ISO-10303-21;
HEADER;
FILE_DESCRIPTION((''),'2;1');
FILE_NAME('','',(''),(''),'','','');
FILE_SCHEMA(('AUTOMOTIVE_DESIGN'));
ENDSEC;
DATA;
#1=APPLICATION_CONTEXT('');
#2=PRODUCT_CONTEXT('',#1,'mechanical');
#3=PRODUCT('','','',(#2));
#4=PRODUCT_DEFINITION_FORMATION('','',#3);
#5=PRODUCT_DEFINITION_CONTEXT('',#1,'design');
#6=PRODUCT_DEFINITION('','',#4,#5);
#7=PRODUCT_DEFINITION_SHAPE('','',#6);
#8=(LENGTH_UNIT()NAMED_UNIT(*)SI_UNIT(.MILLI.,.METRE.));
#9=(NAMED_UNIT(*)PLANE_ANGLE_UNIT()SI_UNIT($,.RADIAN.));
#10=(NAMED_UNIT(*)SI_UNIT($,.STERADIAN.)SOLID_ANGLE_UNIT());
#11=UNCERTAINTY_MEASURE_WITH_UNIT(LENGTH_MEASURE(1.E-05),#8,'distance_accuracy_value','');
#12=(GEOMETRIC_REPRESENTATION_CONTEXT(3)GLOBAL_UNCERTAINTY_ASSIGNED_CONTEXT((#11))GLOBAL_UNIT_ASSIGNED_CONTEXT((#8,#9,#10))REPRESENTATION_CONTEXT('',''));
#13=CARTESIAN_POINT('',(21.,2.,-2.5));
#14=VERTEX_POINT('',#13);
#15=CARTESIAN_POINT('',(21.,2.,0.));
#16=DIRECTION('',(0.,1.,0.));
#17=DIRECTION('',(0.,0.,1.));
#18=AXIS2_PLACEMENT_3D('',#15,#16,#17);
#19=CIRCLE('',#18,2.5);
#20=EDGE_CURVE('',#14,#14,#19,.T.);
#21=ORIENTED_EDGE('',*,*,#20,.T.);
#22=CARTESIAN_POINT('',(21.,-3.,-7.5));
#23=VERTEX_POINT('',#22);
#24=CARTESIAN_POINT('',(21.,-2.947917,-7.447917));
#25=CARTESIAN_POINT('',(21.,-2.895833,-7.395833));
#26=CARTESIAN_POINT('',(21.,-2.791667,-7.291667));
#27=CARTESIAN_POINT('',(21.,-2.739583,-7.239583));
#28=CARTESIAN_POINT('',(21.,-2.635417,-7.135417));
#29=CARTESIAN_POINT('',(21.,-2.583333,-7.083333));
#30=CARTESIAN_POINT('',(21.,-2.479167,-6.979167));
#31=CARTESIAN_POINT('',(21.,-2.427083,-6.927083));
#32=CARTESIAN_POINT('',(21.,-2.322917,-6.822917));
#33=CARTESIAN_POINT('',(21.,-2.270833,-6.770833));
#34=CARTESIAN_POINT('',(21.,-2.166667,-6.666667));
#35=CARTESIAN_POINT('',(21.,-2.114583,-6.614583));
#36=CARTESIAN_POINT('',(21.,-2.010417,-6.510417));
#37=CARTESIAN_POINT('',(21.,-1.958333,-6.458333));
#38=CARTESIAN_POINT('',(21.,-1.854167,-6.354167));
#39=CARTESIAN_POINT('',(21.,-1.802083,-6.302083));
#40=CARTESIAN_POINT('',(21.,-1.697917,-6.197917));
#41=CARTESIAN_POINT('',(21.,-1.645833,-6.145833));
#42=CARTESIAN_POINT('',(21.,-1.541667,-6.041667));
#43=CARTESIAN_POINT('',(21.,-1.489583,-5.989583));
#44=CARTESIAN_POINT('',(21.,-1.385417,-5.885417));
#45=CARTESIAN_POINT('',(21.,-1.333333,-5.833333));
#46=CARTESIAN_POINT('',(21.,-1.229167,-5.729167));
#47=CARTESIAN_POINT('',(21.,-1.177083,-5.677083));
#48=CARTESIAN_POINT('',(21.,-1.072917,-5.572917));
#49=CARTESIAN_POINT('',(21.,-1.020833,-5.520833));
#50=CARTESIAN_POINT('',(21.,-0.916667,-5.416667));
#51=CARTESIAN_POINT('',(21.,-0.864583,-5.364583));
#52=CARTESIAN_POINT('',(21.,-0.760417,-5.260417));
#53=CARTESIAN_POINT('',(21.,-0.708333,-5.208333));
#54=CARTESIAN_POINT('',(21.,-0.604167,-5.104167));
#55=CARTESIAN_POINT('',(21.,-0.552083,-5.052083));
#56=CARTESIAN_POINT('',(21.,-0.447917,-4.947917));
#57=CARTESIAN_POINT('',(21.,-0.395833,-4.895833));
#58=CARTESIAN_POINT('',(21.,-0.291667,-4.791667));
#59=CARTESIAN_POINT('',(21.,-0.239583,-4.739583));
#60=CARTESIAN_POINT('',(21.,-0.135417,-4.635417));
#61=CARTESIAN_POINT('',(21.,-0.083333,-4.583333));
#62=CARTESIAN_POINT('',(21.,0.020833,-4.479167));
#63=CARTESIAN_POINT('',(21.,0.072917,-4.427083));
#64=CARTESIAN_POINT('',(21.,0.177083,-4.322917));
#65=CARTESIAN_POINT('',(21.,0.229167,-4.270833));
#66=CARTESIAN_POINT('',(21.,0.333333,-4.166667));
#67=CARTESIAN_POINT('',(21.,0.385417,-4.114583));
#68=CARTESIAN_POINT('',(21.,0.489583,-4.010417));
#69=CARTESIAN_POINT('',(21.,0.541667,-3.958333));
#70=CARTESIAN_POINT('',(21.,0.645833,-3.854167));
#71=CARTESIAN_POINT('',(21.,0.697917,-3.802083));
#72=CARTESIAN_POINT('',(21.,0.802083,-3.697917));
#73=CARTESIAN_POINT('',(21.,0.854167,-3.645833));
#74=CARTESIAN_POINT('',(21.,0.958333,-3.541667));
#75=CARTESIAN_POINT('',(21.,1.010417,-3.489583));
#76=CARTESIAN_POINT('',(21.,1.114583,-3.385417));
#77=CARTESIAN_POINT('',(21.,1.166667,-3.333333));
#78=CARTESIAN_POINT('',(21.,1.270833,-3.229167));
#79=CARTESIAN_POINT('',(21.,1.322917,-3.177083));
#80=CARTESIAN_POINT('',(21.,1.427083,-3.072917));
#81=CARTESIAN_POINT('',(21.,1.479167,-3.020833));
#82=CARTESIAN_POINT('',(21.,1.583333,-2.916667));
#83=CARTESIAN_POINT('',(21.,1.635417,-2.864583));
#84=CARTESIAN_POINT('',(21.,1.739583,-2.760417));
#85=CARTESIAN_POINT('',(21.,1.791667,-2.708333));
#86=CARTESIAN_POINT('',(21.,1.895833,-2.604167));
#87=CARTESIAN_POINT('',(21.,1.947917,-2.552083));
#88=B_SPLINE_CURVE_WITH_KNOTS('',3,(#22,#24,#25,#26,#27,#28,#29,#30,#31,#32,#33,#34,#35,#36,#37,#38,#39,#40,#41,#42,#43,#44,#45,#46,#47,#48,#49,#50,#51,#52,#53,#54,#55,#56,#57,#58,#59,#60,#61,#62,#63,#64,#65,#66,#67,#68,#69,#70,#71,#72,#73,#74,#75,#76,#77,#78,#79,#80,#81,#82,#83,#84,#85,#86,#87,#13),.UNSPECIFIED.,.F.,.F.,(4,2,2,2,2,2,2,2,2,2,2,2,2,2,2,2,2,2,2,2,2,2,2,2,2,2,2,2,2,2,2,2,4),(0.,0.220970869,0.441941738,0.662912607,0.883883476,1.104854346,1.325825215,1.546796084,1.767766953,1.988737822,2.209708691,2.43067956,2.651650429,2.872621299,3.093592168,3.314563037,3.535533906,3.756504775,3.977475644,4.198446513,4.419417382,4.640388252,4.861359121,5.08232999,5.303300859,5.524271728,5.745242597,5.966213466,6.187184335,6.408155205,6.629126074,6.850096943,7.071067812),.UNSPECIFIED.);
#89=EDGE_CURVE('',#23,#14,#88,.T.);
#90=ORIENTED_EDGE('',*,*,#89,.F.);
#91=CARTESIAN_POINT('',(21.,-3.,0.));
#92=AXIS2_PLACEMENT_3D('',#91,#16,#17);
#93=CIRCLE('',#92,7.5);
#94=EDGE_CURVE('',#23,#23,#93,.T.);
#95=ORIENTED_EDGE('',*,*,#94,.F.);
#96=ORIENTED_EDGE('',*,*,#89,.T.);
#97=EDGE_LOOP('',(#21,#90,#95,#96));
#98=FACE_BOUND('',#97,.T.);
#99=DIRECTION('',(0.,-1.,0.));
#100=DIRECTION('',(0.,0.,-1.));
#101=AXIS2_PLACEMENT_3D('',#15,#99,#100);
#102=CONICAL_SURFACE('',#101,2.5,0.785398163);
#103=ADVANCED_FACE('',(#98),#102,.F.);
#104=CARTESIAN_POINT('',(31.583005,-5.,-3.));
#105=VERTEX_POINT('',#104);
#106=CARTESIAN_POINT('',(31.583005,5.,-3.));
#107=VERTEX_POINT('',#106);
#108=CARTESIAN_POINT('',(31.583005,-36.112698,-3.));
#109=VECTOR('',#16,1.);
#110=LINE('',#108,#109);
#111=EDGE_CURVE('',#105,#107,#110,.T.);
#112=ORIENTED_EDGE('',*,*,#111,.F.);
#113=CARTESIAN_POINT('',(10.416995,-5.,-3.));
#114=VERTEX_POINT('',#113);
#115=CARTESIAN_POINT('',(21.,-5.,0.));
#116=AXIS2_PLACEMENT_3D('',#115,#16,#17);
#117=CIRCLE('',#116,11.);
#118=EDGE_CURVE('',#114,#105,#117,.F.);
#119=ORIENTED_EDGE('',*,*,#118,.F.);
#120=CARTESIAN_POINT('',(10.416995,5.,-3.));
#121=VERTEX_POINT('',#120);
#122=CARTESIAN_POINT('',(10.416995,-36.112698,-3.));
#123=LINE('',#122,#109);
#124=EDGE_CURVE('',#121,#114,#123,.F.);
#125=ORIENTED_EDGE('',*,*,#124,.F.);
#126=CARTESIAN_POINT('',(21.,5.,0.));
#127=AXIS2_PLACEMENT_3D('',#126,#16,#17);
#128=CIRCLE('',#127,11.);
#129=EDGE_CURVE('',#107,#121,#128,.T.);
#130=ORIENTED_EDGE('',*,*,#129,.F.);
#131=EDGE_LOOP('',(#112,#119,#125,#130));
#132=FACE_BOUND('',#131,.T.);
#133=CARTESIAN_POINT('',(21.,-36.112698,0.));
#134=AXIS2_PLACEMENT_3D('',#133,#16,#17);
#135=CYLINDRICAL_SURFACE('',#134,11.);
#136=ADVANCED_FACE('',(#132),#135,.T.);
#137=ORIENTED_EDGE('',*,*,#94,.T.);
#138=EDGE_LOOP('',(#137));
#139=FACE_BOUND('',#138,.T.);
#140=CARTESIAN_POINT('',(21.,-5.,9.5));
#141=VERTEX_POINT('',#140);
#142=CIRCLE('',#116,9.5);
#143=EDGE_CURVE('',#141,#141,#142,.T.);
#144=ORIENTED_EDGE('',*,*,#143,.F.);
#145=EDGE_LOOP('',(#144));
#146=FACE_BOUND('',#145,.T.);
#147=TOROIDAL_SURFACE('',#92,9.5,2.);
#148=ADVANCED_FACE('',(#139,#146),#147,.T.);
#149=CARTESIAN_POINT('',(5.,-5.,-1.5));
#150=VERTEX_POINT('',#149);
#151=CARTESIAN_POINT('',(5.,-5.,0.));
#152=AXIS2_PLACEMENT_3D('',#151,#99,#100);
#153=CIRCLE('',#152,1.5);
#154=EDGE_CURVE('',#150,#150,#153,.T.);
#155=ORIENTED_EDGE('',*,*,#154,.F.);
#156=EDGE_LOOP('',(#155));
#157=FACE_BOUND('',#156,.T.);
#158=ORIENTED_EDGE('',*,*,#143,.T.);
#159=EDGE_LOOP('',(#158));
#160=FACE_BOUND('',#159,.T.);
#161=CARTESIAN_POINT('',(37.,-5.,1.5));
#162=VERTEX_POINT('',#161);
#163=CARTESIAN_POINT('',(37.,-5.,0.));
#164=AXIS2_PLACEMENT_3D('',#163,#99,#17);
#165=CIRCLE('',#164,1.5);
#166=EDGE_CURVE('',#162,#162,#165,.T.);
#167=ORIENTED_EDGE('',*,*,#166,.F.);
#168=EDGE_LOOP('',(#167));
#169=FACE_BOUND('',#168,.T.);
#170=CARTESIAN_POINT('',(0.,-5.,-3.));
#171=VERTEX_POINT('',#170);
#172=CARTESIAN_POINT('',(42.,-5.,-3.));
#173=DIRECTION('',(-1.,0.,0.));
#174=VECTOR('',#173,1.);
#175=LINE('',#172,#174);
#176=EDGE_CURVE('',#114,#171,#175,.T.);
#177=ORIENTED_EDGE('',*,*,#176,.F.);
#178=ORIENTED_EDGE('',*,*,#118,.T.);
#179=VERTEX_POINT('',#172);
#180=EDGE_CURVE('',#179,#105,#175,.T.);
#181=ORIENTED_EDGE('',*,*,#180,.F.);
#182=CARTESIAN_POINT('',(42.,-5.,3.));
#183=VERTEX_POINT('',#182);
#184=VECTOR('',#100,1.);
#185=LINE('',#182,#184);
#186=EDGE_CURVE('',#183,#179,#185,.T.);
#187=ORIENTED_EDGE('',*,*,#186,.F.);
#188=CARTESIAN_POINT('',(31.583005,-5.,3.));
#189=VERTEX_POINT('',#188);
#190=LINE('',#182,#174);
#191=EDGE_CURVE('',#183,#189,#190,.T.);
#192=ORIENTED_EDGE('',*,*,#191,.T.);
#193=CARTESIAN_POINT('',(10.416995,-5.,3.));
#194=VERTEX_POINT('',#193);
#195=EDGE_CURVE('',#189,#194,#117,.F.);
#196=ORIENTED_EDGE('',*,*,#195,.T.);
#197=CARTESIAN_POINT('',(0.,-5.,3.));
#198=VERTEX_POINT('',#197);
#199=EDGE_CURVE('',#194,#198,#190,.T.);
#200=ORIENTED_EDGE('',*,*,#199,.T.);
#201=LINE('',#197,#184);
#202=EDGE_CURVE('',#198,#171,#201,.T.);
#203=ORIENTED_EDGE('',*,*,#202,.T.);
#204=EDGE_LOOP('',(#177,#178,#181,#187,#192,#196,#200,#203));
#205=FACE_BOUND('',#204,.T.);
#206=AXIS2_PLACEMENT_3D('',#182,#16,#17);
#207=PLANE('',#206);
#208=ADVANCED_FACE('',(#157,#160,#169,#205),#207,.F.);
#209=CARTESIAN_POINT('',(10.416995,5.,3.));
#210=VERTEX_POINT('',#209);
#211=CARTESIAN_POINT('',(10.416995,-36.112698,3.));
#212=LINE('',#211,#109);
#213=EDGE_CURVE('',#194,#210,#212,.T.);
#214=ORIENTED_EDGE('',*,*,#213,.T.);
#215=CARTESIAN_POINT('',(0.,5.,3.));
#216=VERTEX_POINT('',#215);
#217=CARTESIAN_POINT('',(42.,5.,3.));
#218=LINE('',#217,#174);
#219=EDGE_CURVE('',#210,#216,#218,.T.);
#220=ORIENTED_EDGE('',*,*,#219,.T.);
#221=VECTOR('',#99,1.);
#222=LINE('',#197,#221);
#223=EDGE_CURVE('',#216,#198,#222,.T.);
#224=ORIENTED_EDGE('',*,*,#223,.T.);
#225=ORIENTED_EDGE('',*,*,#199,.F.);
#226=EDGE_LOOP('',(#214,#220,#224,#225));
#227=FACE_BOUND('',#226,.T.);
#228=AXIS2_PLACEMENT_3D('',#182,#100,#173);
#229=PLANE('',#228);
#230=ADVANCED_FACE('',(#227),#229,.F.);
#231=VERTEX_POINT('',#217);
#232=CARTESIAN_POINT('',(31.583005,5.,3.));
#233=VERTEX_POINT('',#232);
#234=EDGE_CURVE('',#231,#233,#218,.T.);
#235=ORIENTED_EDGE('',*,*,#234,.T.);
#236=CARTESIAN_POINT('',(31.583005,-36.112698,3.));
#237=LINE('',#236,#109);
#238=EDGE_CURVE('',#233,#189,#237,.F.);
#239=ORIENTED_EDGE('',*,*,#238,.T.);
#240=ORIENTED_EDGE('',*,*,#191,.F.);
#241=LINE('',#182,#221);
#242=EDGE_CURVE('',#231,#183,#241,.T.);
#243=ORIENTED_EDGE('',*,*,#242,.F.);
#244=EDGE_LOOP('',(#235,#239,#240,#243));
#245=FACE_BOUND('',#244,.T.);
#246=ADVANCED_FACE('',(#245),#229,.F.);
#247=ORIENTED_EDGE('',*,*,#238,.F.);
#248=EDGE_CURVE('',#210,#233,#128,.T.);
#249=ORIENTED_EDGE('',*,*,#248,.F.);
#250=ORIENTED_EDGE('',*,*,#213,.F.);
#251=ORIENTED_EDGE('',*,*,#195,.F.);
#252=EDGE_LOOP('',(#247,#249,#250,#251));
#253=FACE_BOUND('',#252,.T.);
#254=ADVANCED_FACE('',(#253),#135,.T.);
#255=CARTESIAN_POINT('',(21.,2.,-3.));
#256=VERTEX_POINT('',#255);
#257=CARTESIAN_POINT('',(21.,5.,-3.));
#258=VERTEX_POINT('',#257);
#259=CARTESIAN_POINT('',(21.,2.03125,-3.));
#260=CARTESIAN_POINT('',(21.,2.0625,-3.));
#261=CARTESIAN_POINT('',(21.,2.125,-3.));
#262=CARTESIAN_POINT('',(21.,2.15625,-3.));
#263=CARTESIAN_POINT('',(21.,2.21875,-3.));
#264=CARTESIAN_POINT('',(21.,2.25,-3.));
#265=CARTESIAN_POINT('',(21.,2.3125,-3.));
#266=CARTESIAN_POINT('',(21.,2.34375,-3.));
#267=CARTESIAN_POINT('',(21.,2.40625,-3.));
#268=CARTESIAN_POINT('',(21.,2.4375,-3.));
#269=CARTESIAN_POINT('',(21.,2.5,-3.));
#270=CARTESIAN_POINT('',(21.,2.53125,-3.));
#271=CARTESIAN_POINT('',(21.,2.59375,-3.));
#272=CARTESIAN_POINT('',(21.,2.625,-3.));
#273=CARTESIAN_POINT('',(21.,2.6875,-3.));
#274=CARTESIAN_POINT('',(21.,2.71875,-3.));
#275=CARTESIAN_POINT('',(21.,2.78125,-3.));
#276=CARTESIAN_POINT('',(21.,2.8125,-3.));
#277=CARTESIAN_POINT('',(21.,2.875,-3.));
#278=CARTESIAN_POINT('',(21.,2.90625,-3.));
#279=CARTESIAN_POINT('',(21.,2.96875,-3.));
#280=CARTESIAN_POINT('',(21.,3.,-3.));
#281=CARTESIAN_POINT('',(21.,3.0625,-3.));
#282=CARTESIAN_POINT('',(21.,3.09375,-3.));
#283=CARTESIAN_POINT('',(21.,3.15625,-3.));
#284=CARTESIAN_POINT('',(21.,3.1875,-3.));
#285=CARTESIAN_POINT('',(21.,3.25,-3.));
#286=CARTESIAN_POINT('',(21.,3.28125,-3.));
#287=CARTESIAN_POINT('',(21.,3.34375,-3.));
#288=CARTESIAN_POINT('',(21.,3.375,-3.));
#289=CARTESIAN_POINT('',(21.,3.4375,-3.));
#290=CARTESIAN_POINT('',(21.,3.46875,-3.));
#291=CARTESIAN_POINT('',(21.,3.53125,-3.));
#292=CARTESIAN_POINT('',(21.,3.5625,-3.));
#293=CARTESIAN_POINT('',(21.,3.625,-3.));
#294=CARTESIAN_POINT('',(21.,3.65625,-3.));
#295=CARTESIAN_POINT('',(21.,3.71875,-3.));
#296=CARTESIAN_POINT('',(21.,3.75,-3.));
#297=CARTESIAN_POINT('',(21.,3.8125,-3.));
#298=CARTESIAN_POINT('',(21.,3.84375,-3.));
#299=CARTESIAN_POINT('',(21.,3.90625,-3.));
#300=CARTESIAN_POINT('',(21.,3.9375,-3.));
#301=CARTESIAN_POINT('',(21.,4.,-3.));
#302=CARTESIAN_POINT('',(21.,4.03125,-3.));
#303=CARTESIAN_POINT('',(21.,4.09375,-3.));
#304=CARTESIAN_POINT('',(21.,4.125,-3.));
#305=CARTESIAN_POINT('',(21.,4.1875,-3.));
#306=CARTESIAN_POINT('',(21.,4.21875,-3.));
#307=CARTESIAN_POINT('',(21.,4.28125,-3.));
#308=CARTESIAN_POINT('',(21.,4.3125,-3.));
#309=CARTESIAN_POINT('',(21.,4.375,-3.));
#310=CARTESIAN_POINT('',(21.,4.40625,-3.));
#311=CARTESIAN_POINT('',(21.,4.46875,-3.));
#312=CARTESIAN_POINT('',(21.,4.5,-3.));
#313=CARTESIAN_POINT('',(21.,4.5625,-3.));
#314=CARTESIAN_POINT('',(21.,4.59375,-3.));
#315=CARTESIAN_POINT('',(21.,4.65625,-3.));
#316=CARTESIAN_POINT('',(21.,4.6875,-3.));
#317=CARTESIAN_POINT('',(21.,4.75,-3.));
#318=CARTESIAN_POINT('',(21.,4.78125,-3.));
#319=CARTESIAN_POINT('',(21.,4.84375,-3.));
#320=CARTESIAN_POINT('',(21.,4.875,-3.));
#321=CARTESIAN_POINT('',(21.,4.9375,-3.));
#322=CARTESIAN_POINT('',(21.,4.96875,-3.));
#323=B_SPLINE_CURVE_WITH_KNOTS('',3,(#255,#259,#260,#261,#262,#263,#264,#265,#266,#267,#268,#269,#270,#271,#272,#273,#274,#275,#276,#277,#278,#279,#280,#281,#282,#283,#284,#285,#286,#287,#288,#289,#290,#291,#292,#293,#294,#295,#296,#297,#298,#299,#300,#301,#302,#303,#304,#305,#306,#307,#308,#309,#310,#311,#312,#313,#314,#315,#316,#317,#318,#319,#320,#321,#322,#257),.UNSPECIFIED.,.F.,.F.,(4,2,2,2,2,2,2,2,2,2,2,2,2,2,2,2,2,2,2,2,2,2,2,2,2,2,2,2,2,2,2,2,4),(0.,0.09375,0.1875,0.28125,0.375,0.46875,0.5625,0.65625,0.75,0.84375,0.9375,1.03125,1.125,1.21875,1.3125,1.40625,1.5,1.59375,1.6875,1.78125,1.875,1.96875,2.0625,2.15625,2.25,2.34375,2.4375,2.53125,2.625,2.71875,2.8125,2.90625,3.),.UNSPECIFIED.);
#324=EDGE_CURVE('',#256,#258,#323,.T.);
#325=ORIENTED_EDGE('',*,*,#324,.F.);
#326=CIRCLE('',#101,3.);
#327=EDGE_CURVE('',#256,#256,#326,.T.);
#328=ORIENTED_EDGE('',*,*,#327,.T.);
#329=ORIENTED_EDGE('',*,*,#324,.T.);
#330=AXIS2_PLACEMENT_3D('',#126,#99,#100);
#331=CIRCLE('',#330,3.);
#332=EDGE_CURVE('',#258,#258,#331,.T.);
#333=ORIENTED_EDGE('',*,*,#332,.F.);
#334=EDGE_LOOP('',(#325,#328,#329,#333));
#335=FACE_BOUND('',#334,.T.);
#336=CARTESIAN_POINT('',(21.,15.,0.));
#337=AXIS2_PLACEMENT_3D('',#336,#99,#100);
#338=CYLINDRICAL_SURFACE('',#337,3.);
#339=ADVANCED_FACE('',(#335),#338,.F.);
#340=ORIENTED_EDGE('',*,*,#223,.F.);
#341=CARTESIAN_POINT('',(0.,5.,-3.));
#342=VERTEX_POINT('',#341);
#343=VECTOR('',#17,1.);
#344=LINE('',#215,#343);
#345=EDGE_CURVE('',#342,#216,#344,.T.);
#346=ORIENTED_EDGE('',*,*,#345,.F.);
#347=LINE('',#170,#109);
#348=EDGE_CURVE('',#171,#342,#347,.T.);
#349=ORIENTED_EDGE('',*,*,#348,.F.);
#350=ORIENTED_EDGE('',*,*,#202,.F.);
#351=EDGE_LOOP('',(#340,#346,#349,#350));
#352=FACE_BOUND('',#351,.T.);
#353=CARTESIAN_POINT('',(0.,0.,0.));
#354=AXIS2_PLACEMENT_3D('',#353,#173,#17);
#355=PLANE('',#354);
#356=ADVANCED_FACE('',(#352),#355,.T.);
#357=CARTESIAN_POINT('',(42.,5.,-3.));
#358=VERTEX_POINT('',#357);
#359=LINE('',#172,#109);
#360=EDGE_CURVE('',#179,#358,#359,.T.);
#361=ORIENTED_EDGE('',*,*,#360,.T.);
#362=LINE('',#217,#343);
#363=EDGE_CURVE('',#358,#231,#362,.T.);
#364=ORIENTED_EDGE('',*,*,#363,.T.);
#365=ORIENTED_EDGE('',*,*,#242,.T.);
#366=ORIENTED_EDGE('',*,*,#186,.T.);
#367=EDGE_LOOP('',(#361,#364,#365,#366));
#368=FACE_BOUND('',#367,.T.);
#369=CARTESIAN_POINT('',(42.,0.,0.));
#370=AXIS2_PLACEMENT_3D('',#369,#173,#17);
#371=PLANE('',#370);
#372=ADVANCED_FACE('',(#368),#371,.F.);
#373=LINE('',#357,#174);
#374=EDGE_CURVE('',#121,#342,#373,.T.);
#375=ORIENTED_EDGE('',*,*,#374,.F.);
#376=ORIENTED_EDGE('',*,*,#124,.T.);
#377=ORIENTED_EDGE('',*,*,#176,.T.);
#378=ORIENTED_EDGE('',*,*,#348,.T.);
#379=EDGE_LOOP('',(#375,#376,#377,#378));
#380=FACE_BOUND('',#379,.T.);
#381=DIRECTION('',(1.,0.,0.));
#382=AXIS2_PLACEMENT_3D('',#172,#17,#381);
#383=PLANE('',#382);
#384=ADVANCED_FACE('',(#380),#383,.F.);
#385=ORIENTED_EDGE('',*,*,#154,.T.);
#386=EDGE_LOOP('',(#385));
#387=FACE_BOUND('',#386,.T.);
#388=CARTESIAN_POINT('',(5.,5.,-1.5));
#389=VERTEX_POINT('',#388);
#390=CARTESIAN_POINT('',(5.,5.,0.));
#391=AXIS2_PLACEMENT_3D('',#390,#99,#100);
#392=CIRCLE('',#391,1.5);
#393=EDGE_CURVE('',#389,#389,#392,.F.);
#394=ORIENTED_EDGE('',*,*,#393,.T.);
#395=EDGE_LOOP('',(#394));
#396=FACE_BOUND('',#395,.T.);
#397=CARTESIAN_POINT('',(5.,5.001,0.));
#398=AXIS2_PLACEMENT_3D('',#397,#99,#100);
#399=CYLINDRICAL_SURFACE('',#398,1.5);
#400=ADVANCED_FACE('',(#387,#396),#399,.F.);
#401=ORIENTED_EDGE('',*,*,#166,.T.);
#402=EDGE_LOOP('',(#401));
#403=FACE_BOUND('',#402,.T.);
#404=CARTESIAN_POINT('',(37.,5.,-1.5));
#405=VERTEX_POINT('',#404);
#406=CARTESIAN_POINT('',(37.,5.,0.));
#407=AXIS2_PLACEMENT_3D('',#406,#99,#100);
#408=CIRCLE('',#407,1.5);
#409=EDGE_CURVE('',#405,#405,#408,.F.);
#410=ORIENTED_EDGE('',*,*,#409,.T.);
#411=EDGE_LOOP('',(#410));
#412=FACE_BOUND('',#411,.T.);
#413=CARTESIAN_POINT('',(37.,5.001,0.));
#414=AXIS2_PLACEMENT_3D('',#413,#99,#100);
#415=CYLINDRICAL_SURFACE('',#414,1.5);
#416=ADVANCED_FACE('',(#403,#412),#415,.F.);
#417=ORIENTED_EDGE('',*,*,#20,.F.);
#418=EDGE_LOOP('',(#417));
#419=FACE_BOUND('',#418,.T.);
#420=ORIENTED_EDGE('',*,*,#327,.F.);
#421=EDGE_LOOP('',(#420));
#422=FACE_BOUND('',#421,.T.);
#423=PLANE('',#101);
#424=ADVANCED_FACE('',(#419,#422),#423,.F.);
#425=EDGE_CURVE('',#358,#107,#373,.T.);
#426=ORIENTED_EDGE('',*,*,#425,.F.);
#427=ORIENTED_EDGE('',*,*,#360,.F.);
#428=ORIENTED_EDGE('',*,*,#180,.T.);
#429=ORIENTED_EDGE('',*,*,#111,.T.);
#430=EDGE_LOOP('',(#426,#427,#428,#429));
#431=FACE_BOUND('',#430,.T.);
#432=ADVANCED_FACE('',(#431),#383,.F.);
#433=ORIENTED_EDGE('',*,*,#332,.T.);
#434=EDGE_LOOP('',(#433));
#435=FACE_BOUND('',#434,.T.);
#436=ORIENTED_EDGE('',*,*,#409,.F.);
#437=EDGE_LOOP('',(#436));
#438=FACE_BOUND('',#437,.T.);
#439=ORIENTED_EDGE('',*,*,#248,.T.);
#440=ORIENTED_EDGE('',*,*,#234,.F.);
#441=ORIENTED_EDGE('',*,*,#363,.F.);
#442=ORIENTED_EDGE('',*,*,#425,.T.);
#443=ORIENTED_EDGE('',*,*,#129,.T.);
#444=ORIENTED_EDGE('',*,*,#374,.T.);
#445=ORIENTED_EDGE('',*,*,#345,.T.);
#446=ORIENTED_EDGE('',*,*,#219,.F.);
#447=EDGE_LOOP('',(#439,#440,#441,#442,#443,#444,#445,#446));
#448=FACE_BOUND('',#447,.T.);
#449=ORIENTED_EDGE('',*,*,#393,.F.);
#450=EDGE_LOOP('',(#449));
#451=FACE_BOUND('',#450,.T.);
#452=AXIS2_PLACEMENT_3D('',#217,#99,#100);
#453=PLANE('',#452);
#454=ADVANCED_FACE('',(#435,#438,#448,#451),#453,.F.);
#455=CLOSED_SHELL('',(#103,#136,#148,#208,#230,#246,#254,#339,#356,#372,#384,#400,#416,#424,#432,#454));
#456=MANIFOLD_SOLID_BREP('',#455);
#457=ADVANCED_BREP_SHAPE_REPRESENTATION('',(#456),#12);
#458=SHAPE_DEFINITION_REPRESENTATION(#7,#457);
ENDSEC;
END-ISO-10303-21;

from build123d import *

# Parameters (mm, degrees)
SKETCH2_W           = 6
SKETCH2_H           = 10
BOSS_EXTRUDE1_DEPTH = 42
SKETCH3_R           = 11
BOSS_EXTRUDE2_DEPTH = 10
SKETCH4_R           = 7.5
CUT_EXTRUDE1_DEPTH  = 2
SKETCH6_R           = 3
CUT_EXTRUDE2_DEPTH  = 13
FILLET1_R           = 2
CUT_EXTRUDE3_REACH  = 46.553
SKETCH7_R           = 1.5


with BuildPart() as part:
    # Sketch2 → Boss-Extrude1 (new body)
    with BuildSketch(Plane(origin=(0, 0, 0), x_dir=(0, 0, -1), z_dir=(1, 0, 0))):
        Rectangle(SKETCH2_W, SKETCH2_H)
    extrude(amount=BOSS_EXTRUDE1_DEPTH)

    # Sketch3 → Boss-Extrude2 (add)
    with BuildSketch(Plane(origin=(0, 5, 0), x_dir=(1, 0, 0), z_dir=(0, 1, 0))):
        with Locations((21, 0)):
            Circle(SKETCH3_R)
    extrude(amount=-BOSS_EXTRUDE2_DEPTH)

    # Sketch4 → Cut-Extrude1 (cut)
    with BuildSketch(Plane(origin=(0, -5, 0), x_dir=(-1, 0, 0), z_dir=(0, -1, 0))):
        with Locations(Location((-21, 0, 0), (0, 0, 90))):
            Circle(SKETCH4_R)
    extrude(amount=-CUT_EXTRUDE1_DEPTH, mode=Mode.SUBTRACT)

    # Sketch5 → Cut-Revolve1 (revolve, cut)
    with BuildSketch(Plane(origin=(0, 0, 0), x_dir=(-1, 0, 0), z_dir=(0, 0, -1)), mode=Mode.PRIVATE) as cut_revolve1_sk:
        Polygon((-21, -3), (-28.5, -3), (-23.5, 2), (-21, 2), align=None)
    revolve(cut_revolve1_sk.sketch.rotate(Axis((21, 2, 0), (0, -1, 0)), 270), axis=Axis((21, 2, 0), (0, -1, 0)), mode=Mode.SUBTRACT)

    # Sketch6 → Cut-Extrude2 (cut)
    with BuildSketch(Plane.XZ.offset(-2)):
        with Locations(Location((21, 0, 0), (0, 0, 270))):
            Circle(SKETCH6_R)
    extrude(amount=-CUT_EXTRUDE2_DEPTH, mode=Mode.SUBTRACT)

    # Fillet1
    fillet1_edges = [part.edges().sort_by_distance(p)[0] for p in [
        (21, -5, 7.5),
    ]]
    fillet(fillet1_edges, radius=FILLET1_R - 0.0001)  # a hair under: the kernel refuses the full size

    # Sketch7 → Cut-Extrude3 (cut, up to next)
    with BuildSketch(Plane.XZ.offset(5), mode=Mode.PRIVATE) as cut_extrude3_sk1:
        with Locations(Location((5, 0, 0), (0, 0, 270))):
            Circle(SKETCH7_R)
    cut_extrude3_tool1 = extrude(cut_extrude3_sk1.sketch, amount=-CUT_EXTRUDE3_REACH, mode=Mode.PRIVATE) & part.part
    # Sketch7 → Cut-Extrude3 (cut, up to next)
    with BuildSketch(Plane.XZ.offset(5), mode=Mode.PRIVATE) as cut_extrude3_sk2:
        with Locations(Location((37, 0, 0), (0, 0, 270))):
            Circle(SKETCH7_R)
    cut_extrude3_tool2 = extrude(cut_extrude3_sk2.sketch, amount=-CUT_EXTRUDE3_REACH, mode=Mode.PRIVATE) & part.part
    add(cut_extrude3_tool1.solids().sort_by_distance((5, -5, 0))[0], mode=Mode.SUBTRACT)
    add(cut_extrude3_tool2.solids().sort_by_distance((37, -5, 0))[0], mode=Mode.SUBTRACT)


solid = part.part
